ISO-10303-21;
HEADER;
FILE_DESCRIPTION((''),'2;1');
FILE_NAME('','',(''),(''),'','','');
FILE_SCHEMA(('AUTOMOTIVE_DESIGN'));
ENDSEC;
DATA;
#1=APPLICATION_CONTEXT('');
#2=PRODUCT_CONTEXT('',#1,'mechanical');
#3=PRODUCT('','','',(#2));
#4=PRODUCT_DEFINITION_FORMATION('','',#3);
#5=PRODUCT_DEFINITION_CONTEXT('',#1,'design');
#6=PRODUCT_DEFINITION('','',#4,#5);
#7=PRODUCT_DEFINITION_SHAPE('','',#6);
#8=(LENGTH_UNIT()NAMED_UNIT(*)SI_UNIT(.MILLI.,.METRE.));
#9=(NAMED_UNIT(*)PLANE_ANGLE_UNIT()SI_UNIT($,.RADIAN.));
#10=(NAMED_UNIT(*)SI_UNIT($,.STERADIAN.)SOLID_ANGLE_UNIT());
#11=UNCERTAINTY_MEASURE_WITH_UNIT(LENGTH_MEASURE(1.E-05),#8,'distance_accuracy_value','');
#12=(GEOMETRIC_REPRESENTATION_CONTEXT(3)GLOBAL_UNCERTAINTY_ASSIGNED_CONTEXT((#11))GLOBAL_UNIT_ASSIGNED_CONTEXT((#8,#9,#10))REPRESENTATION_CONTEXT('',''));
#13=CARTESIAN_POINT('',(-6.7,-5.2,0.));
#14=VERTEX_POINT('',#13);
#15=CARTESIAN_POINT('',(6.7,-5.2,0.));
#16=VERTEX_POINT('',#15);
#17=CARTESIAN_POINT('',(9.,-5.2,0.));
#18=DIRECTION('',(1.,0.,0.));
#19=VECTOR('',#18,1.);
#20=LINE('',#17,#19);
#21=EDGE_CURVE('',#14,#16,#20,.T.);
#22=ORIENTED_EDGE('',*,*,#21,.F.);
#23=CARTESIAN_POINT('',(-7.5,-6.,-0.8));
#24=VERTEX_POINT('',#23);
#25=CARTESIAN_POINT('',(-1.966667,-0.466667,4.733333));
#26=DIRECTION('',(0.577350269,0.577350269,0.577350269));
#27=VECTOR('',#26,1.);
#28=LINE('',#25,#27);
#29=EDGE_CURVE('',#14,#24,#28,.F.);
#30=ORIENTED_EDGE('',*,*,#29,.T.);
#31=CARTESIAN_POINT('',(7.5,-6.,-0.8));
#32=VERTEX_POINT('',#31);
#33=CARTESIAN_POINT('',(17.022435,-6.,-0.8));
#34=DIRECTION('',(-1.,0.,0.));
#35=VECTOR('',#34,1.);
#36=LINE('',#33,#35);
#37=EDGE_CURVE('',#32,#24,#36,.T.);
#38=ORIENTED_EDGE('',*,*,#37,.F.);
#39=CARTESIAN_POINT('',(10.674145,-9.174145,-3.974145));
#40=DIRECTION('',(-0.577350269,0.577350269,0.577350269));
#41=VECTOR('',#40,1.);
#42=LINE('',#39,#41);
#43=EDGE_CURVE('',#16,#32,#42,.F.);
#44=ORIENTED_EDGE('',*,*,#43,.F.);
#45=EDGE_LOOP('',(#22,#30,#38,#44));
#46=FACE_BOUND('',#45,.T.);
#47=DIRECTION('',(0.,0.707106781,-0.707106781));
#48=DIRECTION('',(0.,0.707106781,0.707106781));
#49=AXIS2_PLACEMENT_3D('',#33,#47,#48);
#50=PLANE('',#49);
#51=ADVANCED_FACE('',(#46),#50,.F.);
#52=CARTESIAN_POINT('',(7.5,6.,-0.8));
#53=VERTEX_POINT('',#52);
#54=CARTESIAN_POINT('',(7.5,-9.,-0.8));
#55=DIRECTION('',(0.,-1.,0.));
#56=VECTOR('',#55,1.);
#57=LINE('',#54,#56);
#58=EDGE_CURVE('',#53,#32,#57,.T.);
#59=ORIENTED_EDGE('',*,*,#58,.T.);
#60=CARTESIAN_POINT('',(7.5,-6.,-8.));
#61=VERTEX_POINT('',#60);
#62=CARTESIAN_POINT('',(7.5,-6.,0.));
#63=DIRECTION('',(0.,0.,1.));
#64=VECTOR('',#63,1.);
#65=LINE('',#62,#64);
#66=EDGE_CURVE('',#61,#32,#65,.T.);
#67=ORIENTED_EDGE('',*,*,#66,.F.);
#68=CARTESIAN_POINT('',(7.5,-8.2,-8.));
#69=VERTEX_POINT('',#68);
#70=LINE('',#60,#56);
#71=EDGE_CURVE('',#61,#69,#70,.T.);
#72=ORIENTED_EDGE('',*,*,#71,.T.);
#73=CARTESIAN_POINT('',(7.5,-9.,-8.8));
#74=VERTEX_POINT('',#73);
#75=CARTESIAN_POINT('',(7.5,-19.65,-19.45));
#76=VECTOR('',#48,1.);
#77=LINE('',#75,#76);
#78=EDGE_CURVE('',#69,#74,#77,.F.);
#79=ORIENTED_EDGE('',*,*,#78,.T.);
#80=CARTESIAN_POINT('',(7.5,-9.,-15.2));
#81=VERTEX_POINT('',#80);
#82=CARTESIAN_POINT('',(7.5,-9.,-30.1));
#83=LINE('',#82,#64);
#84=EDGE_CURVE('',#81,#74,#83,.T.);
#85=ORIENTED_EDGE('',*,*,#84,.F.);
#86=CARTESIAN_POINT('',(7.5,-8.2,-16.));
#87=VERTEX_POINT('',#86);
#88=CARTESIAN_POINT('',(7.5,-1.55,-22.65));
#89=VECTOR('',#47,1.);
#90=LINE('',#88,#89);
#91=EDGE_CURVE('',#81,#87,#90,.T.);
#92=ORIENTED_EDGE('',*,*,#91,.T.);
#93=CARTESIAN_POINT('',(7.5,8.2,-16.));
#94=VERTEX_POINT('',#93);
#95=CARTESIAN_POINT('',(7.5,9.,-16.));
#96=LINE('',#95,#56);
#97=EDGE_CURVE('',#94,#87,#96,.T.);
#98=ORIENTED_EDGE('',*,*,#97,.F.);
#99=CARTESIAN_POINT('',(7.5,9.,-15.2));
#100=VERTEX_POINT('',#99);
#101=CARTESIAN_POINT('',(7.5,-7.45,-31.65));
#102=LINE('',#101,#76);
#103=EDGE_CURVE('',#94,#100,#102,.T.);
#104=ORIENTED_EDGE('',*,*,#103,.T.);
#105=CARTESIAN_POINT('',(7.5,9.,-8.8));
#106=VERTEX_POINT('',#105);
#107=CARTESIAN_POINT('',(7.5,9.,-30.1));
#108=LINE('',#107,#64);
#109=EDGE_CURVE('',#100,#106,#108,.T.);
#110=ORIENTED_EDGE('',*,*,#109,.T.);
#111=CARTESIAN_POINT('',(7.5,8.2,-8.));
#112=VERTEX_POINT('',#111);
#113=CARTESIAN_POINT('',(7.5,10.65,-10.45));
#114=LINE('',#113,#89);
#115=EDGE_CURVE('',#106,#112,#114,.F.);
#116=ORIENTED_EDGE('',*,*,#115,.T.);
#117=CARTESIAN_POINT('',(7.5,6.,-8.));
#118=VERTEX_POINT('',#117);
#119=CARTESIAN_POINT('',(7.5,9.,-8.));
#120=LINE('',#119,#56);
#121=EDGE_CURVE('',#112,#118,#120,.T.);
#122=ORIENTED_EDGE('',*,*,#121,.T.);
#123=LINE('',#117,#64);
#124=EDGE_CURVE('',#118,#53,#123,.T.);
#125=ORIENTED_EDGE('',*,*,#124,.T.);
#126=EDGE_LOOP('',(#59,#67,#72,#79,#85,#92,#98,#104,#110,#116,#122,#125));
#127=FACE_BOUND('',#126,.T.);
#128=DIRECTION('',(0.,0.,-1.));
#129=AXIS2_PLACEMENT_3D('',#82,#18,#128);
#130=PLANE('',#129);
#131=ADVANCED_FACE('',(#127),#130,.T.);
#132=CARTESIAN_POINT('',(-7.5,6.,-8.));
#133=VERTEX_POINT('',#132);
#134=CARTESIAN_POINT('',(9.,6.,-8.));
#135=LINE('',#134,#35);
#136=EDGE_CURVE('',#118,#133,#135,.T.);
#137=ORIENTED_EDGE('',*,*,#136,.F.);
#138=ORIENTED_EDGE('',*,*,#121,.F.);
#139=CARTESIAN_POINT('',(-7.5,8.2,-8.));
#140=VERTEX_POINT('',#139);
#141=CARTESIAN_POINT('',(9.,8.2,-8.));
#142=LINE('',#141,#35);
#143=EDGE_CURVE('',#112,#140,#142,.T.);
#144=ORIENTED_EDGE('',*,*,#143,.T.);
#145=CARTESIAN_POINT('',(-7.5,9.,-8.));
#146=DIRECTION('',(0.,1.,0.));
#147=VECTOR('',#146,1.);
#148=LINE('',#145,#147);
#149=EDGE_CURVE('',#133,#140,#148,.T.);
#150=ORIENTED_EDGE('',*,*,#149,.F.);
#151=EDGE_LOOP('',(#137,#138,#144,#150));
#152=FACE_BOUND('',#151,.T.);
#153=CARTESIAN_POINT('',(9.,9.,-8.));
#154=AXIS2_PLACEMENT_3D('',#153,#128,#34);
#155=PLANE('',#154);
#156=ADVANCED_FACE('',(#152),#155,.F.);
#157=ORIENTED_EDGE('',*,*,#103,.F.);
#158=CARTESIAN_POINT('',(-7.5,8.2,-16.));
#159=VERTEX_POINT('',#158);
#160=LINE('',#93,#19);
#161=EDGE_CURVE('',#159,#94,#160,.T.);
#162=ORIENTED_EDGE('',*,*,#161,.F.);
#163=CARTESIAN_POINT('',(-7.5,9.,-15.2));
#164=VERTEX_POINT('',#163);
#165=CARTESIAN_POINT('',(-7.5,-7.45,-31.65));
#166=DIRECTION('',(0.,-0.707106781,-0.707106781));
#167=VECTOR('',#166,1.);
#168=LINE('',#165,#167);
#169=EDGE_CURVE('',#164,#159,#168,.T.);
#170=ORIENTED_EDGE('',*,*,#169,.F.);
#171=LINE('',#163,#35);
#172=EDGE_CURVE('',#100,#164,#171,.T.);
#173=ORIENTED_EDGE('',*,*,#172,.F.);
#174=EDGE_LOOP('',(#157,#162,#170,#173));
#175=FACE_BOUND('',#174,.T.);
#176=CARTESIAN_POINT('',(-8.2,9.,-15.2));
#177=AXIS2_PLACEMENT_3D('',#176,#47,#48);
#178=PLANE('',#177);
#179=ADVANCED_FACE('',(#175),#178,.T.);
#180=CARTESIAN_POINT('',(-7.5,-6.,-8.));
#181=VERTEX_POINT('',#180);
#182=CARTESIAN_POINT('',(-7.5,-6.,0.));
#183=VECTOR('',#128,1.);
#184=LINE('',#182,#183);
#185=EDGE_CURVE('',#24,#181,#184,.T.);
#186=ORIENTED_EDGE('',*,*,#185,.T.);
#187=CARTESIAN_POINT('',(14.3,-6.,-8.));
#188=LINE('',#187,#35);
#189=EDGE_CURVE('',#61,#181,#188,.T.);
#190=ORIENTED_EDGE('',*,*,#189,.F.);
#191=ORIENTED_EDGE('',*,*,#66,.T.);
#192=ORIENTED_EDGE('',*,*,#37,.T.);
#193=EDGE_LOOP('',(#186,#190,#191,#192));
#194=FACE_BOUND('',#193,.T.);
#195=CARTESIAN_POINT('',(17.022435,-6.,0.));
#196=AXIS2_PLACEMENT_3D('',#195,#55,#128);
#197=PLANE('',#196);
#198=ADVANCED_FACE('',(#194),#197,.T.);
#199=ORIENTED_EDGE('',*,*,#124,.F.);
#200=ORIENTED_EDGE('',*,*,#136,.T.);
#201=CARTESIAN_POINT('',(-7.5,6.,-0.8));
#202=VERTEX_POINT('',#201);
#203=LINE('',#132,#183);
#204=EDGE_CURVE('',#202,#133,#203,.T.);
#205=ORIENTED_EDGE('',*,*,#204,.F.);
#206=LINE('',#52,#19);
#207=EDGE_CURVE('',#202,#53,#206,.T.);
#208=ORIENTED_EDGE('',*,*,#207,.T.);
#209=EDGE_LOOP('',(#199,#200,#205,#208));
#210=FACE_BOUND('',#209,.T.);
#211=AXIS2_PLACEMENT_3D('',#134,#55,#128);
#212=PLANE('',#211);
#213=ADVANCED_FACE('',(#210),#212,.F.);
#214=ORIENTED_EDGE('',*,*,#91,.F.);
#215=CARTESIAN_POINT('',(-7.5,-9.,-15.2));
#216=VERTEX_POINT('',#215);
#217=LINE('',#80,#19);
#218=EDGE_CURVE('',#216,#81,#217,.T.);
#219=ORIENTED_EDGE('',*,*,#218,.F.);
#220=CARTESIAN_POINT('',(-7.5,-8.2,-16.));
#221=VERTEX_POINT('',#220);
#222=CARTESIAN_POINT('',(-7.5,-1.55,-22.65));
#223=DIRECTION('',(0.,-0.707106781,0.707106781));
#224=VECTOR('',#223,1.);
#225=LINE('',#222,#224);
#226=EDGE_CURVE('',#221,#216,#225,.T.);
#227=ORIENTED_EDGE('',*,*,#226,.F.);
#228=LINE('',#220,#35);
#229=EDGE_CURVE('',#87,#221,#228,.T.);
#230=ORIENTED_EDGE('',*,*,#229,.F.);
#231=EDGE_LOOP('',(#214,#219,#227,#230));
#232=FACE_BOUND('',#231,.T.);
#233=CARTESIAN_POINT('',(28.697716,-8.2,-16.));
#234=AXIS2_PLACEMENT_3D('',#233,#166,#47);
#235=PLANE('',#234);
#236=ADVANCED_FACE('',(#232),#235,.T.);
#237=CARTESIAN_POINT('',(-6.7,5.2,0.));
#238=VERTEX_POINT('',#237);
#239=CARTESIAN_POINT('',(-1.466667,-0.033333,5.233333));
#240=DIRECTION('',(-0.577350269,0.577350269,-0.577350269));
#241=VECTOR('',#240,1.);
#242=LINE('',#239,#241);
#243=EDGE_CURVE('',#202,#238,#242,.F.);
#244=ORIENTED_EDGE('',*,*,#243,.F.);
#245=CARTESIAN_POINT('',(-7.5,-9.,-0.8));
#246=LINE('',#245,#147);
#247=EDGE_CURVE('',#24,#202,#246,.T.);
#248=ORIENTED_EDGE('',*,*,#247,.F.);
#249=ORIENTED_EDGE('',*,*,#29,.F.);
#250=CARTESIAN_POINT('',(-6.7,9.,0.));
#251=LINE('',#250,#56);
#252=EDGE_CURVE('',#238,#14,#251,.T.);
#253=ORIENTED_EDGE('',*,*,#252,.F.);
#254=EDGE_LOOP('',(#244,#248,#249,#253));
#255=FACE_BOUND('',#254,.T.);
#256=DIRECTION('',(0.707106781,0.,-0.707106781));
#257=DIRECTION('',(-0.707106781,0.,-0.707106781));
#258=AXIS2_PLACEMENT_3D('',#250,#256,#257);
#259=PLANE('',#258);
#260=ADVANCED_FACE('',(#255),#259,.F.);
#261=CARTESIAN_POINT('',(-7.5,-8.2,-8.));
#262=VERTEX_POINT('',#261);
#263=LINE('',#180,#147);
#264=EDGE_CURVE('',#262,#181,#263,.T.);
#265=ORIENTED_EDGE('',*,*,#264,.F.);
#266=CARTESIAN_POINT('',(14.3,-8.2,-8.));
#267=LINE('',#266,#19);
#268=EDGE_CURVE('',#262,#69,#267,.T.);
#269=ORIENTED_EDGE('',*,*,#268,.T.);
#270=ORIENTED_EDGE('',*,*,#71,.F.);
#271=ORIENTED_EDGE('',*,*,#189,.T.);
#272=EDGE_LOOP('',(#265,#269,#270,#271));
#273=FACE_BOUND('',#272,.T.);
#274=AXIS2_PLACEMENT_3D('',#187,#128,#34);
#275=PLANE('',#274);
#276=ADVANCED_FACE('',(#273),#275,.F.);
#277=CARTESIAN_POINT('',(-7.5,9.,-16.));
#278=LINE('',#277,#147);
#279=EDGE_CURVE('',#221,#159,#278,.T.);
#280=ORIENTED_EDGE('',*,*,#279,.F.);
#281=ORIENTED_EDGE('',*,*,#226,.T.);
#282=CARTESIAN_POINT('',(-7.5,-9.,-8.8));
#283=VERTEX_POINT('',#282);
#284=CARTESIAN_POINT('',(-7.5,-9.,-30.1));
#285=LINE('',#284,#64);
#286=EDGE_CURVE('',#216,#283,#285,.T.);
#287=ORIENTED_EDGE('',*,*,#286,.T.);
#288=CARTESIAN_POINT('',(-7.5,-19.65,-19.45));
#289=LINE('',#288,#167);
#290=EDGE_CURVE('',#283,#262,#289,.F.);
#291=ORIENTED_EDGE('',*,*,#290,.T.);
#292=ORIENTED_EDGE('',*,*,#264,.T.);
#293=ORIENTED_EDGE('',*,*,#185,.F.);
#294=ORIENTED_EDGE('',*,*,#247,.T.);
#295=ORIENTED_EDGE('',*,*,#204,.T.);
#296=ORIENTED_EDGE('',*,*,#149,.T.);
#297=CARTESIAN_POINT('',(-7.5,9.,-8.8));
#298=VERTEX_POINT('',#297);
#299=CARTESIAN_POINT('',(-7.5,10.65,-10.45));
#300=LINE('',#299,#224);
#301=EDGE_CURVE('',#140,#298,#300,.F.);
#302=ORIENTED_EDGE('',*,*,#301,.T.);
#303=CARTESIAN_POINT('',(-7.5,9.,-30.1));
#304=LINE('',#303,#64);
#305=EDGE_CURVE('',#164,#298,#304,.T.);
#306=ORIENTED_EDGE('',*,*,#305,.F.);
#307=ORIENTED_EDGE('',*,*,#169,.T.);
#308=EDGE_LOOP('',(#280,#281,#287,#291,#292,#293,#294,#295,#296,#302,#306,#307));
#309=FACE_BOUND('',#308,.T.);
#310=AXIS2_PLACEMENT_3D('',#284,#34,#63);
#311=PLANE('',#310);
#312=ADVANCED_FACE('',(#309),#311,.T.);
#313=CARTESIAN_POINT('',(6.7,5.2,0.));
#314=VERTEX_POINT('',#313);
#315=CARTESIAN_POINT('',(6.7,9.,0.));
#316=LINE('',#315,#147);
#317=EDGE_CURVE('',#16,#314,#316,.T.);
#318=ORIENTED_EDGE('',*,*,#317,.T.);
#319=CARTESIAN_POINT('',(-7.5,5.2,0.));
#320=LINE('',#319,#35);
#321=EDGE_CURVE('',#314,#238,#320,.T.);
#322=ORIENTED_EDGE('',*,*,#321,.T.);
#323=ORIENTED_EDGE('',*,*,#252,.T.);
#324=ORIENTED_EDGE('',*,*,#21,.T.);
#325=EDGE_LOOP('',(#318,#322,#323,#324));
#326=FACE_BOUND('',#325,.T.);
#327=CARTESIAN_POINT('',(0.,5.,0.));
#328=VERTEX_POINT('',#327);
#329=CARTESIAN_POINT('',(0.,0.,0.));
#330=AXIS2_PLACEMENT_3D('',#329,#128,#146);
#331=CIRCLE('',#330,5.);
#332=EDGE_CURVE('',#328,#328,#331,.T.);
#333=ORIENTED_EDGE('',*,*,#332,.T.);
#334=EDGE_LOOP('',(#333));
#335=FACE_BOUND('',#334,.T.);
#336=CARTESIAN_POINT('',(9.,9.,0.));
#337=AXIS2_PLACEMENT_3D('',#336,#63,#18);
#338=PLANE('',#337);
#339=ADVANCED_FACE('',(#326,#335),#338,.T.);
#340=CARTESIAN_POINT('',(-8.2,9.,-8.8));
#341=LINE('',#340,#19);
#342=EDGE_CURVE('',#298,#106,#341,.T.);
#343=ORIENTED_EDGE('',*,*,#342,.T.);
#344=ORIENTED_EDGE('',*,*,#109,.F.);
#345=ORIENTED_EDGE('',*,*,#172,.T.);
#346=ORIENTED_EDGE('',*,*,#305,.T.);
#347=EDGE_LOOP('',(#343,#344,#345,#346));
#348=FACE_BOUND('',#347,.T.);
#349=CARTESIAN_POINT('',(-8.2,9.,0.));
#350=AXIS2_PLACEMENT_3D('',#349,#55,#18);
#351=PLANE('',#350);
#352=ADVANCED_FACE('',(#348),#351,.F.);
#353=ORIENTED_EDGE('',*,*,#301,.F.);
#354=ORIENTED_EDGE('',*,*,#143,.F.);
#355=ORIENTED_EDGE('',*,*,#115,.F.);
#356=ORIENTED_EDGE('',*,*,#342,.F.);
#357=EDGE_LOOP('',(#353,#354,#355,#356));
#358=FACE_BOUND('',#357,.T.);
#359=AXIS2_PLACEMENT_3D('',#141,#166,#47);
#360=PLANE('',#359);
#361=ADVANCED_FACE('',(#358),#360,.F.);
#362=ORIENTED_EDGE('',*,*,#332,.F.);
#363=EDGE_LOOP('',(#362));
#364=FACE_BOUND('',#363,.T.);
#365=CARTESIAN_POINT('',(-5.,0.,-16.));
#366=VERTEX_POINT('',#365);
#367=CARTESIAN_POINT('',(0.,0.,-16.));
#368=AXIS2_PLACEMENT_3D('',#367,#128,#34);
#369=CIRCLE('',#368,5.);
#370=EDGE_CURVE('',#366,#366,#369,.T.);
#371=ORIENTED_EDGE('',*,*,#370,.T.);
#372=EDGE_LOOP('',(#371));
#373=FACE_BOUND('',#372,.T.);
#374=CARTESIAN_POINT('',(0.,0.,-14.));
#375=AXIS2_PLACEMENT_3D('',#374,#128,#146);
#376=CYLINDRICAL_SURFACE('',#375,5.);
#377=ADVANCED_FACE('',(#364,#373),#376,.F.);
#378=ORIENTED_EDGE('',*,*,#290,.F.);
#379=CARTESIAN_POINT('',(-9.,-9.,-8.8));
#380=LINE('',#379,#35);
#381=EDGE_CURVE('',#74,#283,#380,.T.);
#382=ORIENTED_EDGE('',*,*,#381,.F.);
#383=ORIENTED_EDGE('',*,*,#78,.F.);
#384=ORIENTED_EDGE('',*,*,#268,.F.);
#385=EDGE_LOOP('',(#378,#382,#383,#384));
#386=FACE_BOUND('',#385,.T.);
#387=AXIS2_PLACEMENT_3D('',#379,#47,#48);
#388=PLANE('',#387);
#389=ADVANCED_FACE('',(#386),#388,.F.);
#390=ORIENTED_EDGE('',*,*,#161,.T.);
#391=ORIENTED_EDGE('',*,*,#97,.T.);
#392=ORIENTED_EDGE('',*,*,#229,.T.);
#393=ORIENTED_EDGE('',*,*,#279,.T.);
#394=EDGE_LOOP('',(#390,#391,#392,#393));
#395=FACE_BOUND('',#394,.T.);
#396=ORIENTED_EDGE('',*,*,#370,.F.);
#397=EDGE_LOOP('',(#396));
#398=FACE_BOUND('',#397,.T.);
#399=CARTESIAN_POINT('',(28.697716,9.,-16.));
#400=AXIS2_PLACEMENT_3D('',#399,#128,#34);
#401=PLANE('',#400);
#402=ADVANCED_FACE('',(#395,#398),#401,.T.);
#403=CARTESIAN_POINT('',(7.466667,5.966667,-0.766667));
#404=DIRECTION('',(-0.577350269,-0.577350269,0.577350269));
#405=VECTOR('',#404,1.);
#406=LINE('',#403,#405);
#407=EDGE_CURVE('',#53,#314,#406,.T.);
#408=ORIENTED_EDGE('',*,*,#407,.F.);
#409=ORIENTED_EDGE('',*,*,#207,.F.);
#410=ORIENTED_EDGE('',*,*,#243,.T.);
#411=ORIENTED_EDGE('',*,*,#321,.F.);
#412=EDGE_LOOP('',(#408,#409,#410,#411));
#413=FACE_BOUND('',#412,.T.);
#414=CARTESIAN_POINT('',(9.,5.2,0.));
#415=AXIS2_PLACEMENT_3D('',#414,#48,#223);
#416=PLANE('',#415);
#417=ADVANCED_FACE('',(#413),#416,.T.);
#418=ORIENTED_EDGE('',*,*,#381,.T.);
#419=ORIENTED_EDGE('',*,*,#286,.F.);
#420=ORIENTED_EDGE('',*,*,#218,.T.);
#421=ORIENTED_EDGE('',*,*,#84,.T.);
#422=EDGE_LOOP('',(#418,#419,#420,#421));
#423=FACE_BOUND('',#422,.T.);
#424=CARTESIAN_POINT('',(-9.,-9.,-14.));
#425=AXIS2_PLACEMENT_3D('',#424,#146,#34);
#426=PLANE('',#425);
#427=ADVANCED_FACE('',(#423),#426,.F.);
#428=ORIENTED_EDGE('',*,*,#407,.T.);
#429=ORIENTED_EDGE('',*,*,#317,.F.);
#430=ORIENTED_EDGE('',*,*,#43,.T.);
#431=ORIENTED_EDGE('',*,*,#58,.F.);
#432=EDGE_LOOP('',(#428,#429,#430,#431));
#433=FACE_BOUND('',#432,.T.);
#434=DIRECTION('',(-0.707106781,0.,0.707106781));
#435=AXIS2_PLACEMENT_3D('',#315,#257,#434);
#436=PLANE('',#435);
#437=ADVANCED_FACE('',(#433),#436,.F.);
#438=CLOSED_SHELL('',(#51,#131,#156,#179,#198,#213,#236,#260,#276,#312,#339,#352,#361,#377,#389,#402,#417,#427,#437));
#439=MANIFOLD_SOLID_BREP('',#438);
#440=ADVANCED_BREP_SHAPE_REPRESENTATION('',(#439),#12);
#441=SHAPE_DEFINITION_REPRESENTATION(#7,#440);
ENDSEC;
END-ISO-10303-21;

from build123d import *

# Parameters (mm, degrees)
SALIENTE_EXTRUIR1_START     = -14.8
SALIENTE_EXTRUIR1_OUTLINE_W = 17.2
SALIENTE_EXTRUIR1_OUTLINE_H = 14
SALIENTE_EXTRUIR1_DEPTH     = 15.6
CROQUIS2_W                  = 14
CROQUIS2_H                  = 14.8
SALIENTE_EXTRUIR2_DEPTH     = 0.8
CROQUIS3_W                  = 18
CROQUIS3_H                  = 7
SALIENTE_EXTRUIR3_DEPTH     = 3.2
CROQUIS4_W                  = 8
CROQUIS4_H                  = 3
CORTAR_EXTRUIR1_DEPTH       = 25.515301344
TALADRO1_D                  = 10
CHAFL_N1_SIZE               = 0.7
CROQUIS7_W                  = 7
CROQUIS7_H                  = 3.2
CORTAR_EXTRUIR2_DEPTH       = 23.6
CROQUIS8_W                  = 8
CROQUIS8_H                  = 0.599553283
SALIENTE_EXTRUIR4_DEPTH     = 18
CROQUIS9_W                  = 8
CROQUIS9_H                  = 3
CORTAR_EXTRUIR3_DEPTH       = 23.3
CROQUIS10_W                 = 8
CROQUIS10_H                 = 18
SALIENTE_EXTRUIR5_DEPTH     = 18
CROQUIS11_OUTSIDE_W         = 26.014
CROQUIS11_OUTSIDE_H         = 26.014
CROQUIS11_OUTSIDE_W_2       = 15
CROQUIS11_OUTSIDE_H_2       = 18
CORTAR_EXTRUIR4_DEPTH       = 30.1
CHAFL_N3_SIZE               = 0.8
CROQUIS12_R                 = 5
CORTAR_EXTRUIR5_DEPTH       = 30.1


with BuildPart() as part:
    # Saliente-Extruir1: read off the stored shape, not the designer's step
    # Saliente-Extruir1 outline → Saliente-Extruir1 (new body)
    with BuildSketch(Plane.XZ.offset(5.8).offset(SALIENTE_EXTRUIR1_START)):
        with Locations((0.4, -7)):
            Rectangle(SALIENTE_EXTRUIR1_OUTLINE_W, SALIENTE_EXTRUIR1_OUTLINE_H)
    extrude(amount=SALIENTE_EXTRUIR1_DEPTH)

    # Saliente-Extruir1 2 outline → Saliente-Extruir1 2 (revolve, cut)
    with BuildSketch(Plane(origin=(-7.4, 0, -3.5), x_dir=(1, 0, 0), z_dir=(0, 0, 1))):
        with BuildLine():
            Line((19.473315075, -5.8), (0.8, -5.799999999))
            ThreePointArc((0.8, -5.799999999), (0.565685425, -6.365685425), (0, -6.6))
            Line((0, -6.6), (19.473315075, -6.6))
            Line((19.473315075, -6.6), (19.473315075, -5.8))
        make_face()
    revolve(axis=Axis((-7.4, 0, -3.5), (0, 1, 0)), mode=Mode.SUBTRACT)

    # Croquis2 → Saliente-Extruir2 (add)
    with BuildSketch(Plane.ZY.offset(8.2)):
        with Locations((-7, 1.6)):
            Rectangle(CROQUIS2_W, CROQUIS2_H)
    extrude(amount=SALIENTE_EXTRUIR2_DEPTH)

    # Croquis3 → Saliente-Extruir3 (add)
    with BuildSketch(Plane.XZ.offset(5.8)):
        with Locations((0, -10.5)):
            Rectangle(CROQUIS3_W, CROQUIS3_H)
    extrude(amount=SALIENTE_EXTRUIR3_DEPTH)

    # Croquis4 → Cortar-Extruir1 (cut, through all)
    with BuildSketch(Plane.ZY.offset(9)):
        with Locations((-4, 7.5)):
            Rectangle(CROQUIS4_W, CROQUIS4_H)
    extrude(amount=-CORTAR_EXTRUIR1_DEPTH, mode=Mode.SUBTRACT)

    # Taladro1 (through all)
    with Locations(Plane(origin=(0, 0, -14), x_dir=(-1, 0, 0), z_dir=(0, 0, -1))):
        with Locations((0, 0)):
            Hole(TALADRO1_D / 2)

    # Chaflán1
    chafl_n1_edges = [part.edges().sort_by_distance(p)[0] for p in [
        (0, 9, -14),
        (0, -9, -14),
    ]]
    chamfer(chafl_n1_edges, length=CHAFL_N1_SIZE)

    # Croquis7 → Cortar-Extruir2 (cut)
    with BuildSketch(Plane(origin=(9, 0, 0), x_dir=(0, 0, -1), z_dir=(1, 0, 0))):
        with Locations((3.5, -7.4)):
            Rectangle(CROQUIS7_W, CROQUIS7_H)
    extrude(amount=-CORTAR_EXTRUIR2_DEPTH, mode=Mode.SUBTRACT)

    # Croquis8 → Saliente-Extruir4 (add)
    with BuildSketch(Plane.ZY.offset(9)):
        with Locations((-4, -5.700223359)):
            Rectangle(CROQUIS8_W, CROQUIS8_H)
    extrude(amount=-SALIENTE_EXTRUIR4_DEPTH)

    # Croquis9 → Cortar-Extruir3 (cut)
    with BuildSketch(Plane.ZY.offset(9)):
        with Locations((-4, -7.5)):
            Rectangle(CROQUIS9_W, CROQUIS9_H)
    extrude(amount=-CORTAR_EXTRUIR3_DEPTH, mode=Mode.SUBTRACT)

    # Croquis10 → Saliente-Extruir5 (add)
    with BuildSketch(Plane.ZY.offset(9)):
        with Locations((-12, 0)):
            Rectangle(CROQUIS10_W, CROQUIS10_H)
    extrude(amount=-SALIENTE_EXTRUIR5_DEPTH)

    # Croquis11 outside → Cortar-Extruir4 (cut)
    with BuildSketch(Plane.XY):
        Rectangle(CROQUIS11_OUTSIDE_W, CROQUIS11_OUTSIDE_H)
        Rectangle(CROQUIS11_OUTSIDE_W_2, CROQUIS11_OUTSIDE_H_2, mode=Mode.SUBTRACT)
    extrude(amount=-CORTAR_EXTRUIR4_DEPTH, mode=Mode.SUBTRACT)

    # Chaflán3
    chafl_n3_edges = [part.edges().sort_by_distance(p)[0] for p in [
        (0, 9, -16),
        (0, -9, -16),
        (0, -9, -8),
        (0, -6, 0),
        (0, 9, -8),
        (0, 6, 0),
        (-7.5, 0, 0),
        (7.5, 0, 0),
    ]]
    chamfer(chafl_n3_edges, length=CHAFL_N3_SIZE)

    # Croquis12 → Cortar-Extruir5 (cut)
    with BuildSketch(Plane.XY.offset(-8)):
        with Locations(Location((0, 0, 0), (0, 0, 90))):
            Circle(CROQUIS12_R)
    extrude(amount=-CORTAR_EXTRUIR5_DEPTH, mode=Mode.SUBTRACT)


solid = part.part
